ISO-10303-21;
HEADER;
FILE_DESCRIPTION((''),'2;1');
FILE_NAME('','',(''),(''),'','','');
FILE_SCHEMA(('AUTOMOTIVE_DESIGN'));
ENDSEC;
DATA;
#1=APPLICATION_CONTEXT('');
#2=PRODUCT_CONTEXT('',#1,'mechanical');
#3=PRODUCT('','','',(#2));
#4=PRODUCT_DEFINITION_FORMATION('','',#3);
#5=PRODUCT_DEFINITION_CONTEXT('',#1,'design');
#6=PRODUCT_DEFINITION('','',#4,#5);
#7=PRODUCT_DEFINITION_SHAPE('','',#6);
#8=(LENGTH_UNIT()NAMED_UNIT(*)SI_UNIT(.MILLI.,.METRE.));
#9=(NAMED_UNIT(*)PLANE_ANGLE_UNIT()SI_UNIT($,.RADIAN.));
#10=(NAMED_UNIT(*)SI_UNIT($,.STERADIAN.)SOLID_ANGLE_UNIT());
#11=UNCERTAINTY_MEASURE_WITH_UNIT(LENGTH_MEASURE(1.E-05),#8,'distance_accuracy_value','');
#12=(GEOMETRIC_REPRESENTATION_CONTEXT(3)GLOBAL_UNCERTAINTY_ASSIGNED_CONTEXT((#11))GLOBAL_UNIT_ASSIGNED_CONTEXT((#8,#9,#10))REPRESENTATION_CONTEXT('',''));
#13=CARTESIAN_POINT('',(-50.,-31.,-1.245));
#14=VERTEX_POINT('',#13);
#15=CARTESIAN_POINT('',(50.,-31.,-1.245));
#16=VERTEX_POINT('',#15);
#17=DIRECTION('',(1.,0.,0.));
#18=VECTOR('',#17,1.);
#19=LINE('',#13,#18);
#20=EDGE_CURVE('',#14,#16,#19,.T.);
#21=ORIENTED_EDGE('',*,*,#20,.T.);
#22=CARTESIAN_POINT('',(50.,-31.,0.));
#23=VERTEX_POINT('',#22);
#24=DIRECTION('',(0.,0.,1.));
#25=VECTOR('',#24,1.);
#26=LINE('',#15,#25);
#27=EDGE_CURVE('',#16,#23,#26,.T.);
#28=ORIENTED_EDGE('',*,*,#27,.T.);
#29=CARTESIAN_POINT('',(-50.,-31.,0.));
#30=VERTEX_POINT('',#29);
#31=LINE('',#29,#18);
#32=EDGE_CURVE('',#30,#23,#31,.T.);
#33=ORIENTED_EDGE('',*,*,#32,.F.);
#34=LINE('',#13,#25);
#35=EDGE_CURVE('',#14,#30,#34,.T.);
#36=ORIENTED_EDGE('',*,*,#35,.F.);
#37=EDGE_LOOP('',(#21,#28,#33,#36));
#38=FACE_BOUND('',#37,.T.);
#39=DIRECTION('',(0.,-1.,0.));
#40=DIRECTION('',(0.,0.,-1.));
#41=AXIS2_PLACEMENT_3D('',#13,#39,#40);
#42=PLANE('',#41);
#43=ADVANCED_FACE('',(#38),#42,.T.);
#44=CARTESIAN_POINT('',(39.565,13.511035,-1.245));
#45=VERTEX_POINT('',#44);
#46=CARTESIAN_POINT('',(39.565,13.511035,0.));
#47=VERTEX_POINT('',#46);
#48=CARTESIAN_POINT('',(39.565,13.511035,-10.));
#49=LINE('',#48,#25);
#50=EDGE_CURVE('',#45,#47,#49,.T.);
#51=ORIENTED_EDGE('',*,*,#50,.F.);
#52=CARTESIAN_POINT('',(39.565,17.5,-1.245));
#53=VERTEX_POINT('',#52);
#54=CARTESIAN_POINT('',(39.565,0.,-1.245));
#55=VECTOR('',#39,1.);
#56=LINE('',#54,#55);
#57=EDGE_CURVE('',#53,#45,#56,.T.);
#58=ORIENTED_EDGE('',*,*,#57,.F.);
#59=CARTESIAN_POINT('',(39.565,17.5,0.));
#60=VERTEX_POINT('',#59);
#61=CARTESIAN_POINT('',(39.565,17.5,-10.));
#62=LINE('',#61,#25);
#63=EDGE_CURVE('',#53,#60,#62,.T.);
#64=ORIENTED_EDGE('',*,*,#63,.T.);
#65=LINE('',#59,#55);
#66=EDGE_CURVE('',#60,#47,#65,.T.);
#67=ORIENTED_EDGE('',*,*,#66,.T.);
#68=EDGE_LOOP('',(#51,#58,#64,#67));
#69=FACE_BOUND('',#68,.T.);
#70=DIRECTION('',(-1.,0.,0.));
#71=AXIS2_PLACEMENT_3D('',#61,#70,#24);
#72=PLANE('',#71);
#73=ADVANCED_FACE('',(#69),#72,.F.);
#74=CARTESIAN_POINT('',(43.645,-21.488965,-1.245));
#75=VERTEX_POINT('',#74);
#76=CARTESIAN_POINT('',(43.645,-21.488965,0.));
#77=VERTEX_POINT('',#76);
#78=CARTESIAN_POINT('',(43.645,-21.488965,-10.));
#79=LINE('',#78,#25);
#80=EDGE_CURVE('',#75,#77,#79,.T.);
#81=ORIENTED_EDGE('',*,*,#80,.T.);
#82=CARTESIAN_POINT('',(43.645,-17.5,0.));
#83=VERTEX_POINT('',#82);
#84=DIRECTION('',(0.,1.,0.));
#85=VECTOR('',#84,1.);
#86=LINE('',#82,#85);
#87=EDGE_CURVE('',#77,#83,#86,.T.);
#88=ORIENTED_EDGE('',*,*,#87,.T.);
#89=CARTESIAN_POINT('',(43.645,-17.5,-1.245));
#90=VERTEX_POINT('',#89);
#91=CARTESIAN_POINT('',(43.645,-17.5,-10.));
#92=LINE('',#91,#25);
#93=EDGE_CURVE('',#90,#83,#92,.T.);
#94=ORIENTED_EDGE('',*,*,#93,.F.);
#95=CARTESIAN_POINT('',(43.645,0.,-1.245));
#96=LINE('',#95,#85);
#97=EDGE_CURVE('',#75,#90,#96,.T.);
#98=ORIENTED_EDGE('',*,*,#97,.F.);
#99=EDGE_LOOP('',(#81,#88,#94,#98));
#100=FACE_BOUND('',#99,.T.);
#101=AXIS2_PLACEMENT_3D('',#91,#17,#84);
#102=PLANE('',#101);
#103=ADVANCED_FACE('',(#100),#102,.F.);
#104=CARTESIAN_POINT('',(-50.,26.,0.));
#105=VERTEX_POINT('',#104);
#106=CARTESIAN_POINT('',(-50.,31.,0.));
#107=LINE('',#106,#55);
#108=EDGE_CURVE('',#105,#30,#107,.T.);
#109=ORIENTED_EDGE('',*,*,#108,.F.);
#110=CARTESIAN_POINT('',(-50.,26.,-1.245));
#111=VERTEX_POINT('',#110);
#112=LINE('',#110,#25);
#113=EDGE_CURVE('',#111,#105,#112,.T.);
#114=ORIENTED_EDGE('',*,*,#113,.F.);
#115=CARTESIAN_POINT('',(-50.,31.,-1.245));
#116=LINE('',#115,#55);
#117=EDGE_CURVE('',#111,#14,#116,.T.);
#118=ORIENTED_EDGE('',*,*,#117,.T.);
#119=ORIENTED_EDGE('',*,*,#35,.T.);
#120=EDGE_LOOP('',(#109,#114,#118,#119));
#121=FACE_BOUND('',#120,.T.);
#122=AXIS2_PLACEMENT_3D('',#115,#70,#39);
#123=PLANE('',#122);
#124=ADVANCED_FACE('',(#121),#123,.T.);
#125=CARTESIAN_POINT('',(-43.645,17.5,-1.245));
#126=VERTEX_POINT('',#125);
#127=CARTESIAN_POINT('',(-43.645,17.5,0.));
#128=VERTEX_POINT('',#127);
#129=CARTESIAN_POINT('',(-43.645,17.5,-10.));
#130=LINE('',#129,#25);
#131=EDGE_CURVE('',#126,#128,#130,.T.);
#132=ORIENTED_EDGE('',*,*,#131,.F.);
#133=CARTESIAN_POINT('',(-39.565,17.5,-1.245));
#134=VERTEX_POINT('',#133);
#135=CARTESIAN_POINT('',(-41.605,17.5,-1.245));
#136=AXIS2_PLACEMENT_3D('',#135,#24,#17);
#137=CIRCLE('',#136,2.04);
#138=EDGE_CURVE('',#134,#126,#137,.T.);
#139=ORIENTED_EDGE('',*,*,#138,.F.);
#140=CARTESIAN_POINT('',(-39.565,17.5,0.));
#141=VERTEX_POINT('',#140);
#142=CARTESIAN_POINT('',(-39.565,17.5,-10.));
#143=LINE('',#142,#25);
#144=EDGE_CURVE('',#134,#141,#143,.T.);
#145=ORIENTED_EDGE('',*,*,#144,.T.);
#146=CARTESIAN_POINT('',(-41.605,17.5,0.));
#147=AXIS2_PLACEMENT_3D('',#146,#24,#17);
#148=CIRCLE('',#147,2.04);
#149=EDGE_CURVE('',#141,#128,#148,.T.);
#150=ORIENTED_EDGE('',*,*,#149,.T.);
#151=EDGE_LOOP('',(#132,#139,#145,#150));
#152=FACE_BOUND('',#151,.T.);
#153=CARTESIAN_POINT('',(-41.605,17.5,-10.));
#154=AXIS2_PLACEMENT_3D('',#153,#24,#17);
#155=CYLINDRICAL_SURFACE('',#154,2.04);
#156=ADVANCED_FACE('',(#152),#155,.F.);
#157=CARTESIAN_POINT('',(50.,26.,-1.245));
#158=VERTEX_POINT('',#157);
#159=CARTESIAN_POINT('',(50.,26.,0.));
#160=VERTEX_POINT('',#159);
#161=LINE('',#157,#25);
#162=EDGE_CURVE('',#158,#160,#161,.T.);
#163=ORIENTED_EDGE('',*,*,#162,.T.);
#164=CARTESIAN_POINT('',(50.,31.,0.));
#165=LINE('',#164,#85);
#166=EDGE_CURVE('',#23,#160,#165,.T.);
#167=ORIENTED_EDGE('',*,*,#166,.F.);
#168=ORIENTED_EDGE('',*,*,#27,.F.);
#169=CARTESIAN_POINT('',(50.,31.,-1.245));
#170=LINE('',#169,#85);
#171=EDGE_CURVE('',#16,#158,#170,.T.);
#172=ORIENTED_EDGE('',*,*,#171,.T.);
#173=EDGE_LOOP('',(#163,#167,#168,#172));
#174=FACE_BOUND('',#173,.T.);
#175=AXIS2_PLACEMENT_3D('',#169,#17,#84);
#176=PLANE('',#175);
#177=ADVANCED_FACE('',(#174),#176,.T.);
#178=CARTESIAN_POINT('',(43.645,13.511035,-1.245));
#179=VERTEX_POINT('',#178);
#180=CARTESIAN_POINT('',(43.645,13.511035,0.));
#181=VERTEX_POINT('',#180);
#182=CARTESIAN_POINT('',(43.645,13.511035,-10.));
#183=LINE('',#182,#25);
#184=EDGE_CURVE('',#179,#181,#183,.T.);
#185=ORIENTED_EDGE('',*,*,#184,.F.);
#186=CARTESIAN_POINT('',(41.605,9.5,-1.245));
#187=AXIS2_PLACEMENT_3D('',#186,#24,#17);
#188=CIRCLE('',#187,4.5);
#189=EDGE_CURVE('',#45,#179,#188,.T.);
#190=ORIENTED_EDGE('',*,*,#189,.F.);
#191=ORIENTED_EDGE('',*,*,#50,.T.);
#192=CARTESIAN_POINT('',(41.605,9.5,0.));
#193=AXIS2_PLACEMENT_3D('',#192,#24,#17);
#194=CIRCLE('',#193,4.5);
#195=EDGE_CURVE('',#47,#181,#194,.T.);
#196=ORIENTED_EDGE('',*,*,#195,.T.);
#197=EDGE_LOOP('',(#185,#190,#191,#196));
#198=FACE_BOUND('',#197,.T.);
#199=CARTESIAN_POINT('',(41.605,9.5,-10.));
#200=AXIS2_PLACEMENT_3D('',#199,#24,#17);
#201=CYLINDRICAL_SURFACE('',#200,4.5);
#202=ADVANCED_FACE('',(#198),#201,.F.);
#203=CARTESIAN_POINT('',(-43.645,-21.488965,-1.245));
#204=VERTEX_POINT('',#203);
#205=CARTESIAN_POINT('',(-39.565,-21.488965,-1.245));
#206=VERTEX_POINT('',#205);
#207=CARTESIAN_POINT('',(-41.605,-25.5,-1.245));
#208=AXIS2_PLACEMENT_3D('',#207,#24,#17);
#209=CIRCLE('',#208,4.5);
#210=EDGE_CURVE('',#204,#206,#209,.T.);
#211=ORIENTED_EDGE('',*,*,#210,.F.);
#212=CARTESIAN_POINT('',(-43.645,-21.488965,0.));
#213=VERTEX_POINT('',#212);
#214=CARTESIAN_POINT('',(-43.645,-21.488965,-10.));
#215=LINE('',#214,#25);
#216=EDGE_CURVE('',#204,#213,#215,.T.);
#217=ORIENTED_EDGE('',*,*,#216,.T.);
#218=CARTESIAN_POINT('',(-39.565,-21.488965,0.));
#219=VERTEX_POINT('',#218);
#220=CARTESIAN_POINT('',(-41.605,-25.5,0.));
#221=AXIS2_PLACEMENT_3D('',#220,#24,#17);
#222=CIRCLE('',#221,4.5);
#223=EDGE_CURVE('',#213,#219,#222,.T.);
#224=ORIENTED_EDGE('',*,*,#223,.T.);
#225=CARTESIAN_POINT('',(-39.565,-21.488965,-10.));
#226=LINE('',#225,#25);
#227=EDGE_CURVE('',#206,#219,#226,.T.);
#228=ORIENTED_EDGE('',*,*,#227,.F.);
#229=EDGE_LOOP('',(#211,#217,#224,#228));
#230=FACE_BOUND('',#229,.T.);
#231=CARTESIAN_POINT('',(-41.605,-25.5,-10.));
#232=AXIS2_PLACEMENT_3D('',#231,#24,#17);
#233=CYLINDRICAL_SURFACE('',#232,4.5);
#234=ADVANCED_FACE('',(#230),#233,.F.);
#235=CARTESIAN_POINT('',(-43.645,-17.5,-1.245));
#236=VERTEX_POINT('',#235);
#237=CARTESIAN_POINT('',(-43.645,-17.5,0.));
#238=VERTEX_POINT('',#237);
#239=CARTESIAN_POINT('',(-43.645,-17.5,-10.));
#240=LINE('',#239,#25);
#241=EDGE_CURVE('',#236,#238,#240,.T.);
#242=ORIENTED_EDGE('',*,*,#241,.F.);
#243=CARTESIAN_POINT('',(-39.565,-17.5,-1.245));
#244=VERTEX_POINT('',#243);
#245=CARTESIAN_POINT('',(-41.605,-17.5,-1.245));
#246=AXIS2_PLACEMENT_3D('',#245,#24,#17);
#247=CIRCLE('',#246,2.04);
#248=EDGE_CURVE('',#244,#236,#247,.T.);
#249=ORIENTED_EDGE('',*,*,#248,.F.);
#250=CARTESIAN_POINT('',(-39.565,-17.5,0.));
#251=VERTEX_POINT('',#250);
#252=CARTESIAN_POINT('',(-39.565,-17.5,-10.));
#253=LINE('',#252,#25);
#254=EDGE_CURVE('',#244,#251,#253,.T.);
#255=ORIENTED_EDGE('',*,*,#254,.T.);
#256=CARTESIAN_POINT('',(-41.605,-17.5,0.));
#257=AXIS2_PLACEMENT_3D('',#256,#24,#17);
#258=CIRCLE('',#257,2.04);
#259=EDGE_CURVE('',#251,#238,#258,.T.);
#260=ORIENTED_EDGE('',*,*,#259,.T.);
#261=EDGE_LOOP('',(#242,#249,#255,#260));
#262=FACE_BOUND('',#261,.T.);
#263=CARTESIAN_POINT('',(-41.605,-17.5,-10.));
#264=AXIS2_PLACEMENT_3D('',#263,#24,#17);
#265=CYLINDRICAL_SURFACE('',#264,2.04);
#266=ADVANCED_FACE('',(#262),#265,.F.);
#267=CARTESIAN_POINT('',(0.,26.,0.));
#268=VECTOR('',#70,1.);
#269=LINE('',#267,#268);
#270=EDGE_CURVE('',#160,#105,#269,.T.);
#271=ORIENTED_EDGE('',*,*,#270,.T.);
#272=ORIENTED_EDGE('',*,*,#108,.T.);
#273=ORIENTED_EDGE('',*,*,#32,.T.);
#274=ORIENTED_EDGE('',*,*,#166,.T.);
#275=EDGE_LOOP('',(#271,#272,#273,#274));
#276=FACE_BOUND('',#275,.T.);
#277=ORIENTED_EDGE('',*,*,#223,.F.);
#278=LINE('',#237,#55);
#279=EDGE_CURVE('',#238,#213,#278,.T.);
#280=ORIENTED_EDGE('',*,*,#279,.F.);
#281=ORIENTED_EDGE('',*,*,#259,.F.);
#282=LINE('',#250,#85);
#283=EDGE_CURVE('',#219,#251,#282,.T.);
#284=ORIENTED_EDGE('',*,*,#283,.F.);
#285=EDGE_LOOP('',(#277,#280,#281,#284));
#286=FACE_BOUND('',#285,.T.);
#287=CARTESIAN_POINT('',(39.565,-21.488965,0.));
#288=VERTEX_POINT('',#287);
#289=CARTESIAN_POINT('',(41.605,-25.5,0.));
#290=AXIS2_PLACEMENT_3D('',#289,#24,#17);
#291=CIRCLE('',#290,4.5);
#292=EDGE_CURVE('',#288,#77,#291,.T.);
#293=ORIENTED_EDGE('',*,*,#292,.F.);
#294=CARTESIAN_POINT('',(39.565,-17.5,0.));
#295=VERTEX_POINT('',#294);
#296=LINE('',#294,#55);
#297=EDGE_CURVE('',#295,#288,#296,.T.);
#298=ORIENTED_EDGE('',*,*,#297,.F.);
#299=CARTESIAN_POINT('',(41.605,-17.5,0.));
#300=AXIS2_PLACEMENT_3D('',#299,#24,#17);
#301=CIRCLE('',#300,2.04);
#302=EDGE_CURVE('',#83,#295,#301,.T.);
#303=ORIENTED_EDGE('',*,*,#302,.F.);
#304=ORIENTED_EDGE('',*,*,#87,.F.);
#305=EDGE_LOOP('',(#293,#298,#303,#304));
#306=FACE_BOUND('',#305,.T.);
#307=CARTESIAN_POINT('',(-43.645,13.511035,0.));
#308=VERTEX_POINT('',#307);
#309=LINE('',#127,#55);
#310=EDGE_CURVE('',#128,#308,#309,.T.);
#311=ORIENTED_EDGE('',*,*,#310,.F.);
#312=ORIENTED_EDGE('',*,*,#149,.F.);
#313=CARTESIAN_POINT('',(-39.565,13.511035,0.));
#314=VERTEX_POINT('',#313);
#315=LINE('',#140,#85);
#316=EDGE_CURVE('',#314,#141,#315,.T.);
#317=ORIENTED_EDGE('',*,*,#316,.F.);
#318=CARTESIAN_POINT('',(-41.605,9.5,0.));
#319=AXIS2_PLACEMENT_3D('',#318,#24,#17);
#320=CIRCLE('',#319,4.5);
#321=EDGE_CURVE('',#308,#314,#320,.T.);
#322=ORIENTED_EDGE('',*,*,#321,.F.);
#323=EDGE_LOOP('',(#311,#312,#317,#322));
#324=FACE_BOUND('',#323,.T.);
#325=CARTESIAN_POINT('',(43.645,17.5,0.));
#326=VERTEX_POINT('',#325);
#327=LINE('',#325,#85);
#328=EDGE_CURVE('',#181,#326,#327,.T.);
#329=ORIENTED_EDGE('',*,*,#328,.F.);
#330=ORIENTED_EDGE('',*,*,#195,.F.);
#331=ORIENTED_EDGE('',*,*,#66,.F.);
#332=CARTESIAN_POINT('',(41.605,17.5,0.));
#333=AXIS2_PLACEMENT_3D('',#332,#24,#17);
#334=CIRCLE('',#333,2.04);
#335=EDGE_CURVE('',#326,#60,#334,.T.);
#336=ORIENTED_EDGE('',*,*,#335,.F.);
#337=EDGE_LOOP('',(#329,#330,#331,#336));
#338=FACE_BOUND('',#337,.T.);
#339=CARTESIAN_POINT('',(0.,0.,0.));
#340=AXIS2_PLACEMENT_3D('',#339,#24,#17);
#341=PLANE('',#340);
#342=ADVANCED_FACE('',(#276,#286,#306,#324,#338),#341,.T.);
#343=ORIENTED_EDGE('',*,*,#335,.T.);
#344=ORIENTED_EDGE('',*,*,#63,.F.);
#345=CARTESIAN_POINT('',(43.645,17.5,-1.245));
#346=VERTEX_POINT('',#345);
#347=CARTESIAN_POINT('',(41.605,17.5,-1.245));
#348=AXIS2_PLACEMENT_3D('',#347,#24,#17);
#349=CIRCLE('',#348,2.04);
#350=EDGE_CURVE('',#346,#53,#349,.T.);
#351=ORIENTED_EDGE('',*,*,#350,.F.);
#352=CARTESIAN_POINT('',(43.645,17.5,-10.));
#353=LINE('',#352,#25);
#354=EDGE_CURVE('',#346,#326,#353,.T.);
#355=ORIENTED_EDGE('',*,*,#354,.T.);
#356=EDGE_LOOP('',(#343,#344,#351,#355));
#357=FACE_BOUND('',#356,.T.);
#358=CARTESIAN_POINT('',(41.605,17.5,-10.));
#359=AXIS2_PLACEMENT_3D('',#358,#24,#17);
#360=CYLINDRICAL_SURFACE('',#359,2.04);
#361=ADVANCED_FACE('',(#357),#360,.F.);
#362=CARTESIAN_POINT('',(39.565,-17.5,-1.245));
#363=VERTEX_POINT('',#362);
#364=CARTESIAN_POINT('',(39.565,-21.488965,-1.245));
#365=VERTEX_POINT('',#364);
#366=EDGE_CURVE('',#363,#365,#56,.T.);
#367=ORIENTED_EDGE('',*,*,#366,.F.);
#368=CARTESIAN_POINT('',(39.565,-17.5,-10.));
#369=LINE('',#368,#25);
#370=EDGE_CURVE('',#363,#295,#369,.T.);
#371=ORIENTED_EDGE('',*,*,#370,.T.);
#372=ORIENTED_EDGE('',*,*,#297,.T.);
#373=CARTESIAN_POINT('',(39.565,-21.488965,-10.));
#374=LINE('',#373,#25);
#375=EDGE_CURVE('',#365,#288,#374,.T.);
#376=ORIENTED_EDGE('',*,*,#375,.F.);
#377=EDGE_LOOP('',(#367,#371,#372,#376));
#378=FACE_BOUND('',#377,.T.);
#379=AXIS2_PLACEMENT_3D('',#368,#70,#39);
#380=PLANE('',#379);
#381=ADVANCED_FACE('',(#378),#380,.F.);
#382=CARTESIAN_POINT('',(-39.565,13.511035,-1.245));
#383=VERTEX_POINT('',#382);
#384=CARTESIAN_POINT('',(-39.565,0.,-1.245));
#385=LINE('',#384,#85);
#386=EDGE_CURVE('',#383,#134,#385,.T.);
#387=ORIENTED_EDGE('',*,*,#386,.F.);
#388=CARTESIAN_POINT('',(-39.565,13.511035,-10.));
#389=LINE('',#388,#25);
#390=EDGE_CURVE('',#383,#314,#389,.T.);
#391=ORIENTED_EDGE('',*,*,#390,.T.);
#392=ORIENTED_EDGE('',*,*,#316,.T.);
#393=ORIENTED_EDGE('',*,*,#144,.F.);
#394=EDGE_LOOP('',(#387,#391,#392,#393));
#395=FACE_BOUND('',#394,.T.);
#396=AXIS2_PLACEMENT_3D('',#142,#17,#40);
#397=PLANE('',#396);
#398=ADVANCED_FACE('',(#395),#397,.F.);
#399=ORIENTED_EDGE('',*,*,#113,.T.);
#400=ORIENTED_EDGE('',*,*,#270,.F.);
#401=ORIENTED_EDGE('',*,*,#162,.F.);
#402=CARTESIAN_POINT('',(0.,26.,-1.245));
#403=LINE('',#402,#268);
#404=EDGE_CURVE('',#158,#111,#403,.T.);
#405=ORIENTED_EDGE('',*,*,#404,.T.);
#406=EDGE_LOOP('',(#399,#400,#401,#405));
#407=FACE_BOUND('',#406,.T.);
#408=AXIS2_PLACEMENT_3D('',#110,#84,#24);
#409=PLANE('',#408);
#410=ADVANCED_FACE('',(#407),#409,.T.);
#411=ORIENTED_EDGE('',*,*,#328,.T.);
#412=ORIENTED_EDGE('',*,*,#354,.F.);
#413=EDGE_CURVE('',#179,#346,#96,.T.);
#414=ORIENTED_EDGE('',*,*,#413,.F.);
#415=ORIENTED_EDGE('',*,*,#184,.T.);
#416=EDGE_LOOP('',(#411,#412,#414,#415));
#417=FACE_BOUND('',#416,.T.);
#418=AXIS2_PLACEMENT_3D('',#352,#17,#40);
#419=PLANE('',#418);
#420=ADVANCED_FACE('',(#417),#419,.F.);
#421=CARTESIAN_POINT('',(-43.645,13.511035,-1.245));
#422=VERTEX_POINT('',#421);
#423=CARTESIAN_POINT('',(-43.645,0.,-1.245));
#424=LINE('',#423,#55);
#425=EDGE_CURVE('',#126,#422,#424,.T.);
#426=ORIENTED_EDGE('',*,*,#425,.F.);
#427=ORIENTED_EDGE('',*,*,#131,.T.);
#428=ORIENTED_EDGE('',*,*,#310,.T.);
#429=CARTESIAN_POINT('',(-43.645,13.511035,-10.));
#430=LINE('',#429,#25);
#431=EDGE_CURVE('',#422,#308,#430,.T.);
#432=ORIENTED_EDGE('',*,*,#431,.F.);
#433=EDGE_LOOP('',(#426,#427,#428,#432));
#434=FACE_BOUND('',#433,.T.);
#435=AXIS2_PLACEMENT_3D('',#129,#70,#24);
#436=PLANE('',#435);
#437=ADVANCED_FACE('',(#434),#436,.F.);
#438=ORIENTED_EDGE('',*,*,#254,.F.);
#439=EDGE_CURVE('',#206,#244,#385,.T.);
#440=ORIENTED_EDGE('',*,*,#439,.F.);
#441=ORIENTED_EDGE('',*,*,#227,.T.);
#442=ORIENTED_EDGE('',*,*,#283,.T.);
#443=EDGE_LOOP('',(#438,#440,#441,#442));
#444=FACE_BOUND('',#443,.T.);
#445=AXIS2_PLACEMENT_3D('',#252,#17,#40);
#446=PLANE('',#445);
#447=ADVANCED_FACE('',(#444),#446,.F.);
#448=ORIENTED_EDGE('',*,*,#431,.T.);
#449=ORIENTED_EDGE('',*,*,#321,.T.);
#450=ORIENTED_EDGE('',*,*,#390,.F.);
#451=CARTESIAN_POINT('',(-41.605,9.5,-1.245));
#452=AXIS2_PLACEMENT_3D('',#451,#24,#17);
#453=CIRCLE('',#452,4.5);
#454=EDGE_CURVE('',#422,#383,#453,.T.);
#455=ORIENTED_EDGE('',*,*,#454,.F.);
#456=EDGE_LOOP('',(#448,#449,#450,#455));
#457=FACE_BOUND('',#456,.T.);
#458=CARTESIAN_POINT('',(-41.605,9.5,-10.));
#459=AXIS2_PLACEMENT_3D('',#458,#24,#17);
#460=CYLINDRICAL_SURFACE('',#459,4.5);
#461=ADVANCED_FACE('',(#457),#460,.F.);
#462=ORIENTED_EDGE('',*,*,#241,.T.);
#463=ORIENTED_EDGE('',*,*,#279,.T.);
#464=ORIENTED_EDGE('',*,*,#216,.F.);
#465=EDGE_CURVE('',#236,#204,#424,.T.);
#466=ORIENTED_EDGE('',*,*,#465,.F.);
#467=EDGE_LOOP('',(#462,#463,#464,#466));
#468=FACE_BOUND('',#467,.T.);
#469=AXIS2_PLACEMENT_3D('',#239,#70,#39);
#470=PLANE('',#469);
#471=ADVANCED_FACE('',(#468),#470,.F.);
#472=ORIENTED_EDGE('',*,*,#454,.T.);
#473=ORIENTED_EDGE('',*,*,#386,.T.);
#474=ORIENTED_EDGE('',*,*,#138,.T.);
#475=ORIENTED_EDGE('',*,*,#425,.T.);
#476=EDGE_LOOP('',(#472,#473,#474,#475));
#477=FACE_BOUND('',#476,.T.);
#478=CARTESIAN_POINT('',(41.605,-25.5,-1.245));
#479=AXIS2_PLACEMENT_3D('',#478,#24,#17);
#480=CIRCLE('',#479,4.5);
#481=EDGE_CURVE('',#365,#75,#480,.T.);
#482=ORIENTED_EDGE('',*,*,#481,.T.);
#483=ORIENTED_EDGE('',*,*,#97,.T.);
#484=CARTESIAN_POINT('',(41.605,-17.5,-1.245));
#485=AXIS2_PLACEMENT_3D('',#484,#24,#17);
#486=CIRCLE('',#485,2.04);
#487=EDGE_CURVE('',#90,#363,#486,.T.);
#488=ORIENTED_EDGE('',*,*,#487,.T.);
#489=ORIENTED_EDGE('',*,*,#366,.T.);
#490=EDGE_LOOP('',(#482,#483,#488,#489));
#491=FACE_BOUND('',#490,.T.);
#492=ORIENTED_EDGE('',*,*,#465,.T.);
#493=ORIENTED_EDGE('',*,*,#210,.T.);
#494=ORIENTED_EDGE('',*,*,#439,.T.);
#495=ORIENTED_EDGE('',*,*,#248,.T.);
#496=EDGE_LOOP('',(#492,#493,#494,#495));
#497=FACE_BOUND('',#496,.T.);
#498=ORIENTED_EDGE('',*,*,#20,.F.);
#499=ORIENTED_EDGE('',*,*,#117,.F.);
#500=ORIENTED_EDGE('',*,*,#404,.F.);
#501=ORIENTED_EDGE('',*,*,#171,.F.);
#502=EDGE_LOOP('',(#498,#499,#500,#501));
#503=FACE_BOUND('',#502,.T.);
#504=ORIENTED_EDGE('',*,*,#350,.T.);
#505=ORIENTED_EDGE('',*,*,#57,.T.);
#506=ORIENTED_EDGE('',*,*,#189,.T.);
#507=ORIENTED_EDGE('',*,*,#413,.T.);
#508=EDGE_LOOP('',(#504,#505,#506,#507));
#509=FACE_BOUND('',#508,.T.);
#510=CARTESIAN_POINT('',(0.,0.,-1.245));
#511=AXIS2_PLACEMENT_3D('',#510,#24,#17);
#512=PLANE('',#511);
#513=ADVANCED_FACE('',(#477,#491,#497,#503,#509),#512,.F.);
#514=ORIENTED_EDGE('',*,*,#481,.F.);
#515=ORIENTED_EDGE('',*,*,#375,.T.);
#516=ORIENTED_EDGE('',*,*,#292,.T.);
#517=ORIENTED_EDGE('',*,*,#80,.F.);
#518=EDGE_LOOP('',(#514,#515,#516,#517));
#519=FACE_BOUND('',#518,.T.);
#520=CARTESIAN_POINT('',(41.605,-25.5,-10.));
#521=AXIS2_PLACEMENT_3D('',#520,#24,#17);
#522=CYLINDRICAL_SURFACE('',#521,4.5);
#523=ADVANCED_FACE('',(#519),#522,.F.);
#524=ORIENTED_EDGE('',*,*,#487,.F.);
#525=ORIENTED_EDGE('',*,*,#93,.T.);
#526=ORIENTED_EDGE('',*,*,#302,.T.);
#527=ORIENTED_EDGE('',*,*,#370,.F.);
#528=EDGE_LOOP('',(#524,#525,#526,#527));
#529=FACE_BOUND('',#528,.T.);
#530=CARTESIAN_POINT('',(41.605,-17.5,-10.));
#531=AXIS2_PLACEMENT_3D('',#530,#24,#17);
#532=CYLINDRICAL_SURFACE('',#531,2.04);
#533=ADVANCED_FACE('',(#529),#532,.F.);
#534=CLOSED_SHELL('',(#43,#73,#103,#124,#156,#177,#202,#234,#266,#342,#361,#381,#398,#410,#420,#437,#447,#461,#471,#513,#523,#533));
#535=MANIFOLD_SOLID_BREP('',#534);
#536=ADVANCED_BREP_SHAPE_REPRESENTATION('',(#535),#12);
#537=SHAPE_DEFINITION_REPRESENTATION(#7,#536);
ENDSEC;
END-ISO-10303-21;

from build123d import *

# Parameters (mm, degrees)
SKETCH1_W          = 100
SKETCH1_H          = 62
BASE_FLANGE1_DEPTH = 1.245
CUT_EXTRUDE7_DEPTH = 10
MOVE_FACE1_BY      = 5


# Sheet-metal steps are written as plain solids
with BuildPart() as part:
    # Sketch1 → Base-Flange1 (new body)
    with BuildSketch(Plane.XY):
        Rectangle(SKETCH1_W, SKETCH1_H)
    extrude(amount=-BASE_FLANGE1_DEPTH)

    # Sketch6 → Cut-Extrude7 (cut)
    with BuildSketch(Plane.XY):
        with BuildLine():
            Line((-43.645, 17.5), (-43.645, 13.511034779))
            ThreePointArc((-43.645, 13.511034779), (-41.605, 5), (-39.565, 13.511034779))
            Line((-39.565, 13.511034779), (-39.565, 17.5))
            ThreePointArc((-39.565, 17.5), (-41.605, 19.54), (-43.645, 17.5))
        make_face()
        with BuildLine():
            Line((39.565, 17.5), (39.565, 13.511034779))
            ThreePointArc((39.565, 13.511034779), (41.605, 5), (43.645, 13.511034779))
            Line((43.645, 13.511034779), (43.645, 17.5))
            ThreePointArc((43.645, 17.5), (41.605, 19.54), (39.565, 17.5))
        make_face()
        with BuildLine():
            Line((-43.645, -17.5), (-43.645, -21.488965221))
            ThreePointArc((-43.645, -21.488965221), (-41.605, -30), (-39.565, -21.488965221))
            Line((-39.565, -21.488965221), (-39.565, -17.5))
            ThreePointArc((-39.565, -17.5), (-41.605, -15.46), (-43.645, -17.5))
        make_face()
        with BuildLine():
            Line((39.565, -17.5), (39.565, -21.488965221))
            ThreePointArc((39.565, -21.488965221), (41.605, -30), (43.645, -21.488965221))
            Line((43.645, -21.488965221), (43.645, -17.5))
            ThreePointArc((43.645, -17.5), (41.605, -15.46), (39.565, -17.5))
        make_face()
    extrude(amount=-CUT_EXTRUDE7_DEPTH, mode=Mode.SUBTRACT)

    # Move Face1: a face moved inward by 5.0
    extrude(part.faces().sort_by_distance((0, 31, -0.6225))[0], amount=MOVE_FACE1_BY, dir=(0, -1, 0), mode=Mode.SUBTRACT)


solid = part.part
